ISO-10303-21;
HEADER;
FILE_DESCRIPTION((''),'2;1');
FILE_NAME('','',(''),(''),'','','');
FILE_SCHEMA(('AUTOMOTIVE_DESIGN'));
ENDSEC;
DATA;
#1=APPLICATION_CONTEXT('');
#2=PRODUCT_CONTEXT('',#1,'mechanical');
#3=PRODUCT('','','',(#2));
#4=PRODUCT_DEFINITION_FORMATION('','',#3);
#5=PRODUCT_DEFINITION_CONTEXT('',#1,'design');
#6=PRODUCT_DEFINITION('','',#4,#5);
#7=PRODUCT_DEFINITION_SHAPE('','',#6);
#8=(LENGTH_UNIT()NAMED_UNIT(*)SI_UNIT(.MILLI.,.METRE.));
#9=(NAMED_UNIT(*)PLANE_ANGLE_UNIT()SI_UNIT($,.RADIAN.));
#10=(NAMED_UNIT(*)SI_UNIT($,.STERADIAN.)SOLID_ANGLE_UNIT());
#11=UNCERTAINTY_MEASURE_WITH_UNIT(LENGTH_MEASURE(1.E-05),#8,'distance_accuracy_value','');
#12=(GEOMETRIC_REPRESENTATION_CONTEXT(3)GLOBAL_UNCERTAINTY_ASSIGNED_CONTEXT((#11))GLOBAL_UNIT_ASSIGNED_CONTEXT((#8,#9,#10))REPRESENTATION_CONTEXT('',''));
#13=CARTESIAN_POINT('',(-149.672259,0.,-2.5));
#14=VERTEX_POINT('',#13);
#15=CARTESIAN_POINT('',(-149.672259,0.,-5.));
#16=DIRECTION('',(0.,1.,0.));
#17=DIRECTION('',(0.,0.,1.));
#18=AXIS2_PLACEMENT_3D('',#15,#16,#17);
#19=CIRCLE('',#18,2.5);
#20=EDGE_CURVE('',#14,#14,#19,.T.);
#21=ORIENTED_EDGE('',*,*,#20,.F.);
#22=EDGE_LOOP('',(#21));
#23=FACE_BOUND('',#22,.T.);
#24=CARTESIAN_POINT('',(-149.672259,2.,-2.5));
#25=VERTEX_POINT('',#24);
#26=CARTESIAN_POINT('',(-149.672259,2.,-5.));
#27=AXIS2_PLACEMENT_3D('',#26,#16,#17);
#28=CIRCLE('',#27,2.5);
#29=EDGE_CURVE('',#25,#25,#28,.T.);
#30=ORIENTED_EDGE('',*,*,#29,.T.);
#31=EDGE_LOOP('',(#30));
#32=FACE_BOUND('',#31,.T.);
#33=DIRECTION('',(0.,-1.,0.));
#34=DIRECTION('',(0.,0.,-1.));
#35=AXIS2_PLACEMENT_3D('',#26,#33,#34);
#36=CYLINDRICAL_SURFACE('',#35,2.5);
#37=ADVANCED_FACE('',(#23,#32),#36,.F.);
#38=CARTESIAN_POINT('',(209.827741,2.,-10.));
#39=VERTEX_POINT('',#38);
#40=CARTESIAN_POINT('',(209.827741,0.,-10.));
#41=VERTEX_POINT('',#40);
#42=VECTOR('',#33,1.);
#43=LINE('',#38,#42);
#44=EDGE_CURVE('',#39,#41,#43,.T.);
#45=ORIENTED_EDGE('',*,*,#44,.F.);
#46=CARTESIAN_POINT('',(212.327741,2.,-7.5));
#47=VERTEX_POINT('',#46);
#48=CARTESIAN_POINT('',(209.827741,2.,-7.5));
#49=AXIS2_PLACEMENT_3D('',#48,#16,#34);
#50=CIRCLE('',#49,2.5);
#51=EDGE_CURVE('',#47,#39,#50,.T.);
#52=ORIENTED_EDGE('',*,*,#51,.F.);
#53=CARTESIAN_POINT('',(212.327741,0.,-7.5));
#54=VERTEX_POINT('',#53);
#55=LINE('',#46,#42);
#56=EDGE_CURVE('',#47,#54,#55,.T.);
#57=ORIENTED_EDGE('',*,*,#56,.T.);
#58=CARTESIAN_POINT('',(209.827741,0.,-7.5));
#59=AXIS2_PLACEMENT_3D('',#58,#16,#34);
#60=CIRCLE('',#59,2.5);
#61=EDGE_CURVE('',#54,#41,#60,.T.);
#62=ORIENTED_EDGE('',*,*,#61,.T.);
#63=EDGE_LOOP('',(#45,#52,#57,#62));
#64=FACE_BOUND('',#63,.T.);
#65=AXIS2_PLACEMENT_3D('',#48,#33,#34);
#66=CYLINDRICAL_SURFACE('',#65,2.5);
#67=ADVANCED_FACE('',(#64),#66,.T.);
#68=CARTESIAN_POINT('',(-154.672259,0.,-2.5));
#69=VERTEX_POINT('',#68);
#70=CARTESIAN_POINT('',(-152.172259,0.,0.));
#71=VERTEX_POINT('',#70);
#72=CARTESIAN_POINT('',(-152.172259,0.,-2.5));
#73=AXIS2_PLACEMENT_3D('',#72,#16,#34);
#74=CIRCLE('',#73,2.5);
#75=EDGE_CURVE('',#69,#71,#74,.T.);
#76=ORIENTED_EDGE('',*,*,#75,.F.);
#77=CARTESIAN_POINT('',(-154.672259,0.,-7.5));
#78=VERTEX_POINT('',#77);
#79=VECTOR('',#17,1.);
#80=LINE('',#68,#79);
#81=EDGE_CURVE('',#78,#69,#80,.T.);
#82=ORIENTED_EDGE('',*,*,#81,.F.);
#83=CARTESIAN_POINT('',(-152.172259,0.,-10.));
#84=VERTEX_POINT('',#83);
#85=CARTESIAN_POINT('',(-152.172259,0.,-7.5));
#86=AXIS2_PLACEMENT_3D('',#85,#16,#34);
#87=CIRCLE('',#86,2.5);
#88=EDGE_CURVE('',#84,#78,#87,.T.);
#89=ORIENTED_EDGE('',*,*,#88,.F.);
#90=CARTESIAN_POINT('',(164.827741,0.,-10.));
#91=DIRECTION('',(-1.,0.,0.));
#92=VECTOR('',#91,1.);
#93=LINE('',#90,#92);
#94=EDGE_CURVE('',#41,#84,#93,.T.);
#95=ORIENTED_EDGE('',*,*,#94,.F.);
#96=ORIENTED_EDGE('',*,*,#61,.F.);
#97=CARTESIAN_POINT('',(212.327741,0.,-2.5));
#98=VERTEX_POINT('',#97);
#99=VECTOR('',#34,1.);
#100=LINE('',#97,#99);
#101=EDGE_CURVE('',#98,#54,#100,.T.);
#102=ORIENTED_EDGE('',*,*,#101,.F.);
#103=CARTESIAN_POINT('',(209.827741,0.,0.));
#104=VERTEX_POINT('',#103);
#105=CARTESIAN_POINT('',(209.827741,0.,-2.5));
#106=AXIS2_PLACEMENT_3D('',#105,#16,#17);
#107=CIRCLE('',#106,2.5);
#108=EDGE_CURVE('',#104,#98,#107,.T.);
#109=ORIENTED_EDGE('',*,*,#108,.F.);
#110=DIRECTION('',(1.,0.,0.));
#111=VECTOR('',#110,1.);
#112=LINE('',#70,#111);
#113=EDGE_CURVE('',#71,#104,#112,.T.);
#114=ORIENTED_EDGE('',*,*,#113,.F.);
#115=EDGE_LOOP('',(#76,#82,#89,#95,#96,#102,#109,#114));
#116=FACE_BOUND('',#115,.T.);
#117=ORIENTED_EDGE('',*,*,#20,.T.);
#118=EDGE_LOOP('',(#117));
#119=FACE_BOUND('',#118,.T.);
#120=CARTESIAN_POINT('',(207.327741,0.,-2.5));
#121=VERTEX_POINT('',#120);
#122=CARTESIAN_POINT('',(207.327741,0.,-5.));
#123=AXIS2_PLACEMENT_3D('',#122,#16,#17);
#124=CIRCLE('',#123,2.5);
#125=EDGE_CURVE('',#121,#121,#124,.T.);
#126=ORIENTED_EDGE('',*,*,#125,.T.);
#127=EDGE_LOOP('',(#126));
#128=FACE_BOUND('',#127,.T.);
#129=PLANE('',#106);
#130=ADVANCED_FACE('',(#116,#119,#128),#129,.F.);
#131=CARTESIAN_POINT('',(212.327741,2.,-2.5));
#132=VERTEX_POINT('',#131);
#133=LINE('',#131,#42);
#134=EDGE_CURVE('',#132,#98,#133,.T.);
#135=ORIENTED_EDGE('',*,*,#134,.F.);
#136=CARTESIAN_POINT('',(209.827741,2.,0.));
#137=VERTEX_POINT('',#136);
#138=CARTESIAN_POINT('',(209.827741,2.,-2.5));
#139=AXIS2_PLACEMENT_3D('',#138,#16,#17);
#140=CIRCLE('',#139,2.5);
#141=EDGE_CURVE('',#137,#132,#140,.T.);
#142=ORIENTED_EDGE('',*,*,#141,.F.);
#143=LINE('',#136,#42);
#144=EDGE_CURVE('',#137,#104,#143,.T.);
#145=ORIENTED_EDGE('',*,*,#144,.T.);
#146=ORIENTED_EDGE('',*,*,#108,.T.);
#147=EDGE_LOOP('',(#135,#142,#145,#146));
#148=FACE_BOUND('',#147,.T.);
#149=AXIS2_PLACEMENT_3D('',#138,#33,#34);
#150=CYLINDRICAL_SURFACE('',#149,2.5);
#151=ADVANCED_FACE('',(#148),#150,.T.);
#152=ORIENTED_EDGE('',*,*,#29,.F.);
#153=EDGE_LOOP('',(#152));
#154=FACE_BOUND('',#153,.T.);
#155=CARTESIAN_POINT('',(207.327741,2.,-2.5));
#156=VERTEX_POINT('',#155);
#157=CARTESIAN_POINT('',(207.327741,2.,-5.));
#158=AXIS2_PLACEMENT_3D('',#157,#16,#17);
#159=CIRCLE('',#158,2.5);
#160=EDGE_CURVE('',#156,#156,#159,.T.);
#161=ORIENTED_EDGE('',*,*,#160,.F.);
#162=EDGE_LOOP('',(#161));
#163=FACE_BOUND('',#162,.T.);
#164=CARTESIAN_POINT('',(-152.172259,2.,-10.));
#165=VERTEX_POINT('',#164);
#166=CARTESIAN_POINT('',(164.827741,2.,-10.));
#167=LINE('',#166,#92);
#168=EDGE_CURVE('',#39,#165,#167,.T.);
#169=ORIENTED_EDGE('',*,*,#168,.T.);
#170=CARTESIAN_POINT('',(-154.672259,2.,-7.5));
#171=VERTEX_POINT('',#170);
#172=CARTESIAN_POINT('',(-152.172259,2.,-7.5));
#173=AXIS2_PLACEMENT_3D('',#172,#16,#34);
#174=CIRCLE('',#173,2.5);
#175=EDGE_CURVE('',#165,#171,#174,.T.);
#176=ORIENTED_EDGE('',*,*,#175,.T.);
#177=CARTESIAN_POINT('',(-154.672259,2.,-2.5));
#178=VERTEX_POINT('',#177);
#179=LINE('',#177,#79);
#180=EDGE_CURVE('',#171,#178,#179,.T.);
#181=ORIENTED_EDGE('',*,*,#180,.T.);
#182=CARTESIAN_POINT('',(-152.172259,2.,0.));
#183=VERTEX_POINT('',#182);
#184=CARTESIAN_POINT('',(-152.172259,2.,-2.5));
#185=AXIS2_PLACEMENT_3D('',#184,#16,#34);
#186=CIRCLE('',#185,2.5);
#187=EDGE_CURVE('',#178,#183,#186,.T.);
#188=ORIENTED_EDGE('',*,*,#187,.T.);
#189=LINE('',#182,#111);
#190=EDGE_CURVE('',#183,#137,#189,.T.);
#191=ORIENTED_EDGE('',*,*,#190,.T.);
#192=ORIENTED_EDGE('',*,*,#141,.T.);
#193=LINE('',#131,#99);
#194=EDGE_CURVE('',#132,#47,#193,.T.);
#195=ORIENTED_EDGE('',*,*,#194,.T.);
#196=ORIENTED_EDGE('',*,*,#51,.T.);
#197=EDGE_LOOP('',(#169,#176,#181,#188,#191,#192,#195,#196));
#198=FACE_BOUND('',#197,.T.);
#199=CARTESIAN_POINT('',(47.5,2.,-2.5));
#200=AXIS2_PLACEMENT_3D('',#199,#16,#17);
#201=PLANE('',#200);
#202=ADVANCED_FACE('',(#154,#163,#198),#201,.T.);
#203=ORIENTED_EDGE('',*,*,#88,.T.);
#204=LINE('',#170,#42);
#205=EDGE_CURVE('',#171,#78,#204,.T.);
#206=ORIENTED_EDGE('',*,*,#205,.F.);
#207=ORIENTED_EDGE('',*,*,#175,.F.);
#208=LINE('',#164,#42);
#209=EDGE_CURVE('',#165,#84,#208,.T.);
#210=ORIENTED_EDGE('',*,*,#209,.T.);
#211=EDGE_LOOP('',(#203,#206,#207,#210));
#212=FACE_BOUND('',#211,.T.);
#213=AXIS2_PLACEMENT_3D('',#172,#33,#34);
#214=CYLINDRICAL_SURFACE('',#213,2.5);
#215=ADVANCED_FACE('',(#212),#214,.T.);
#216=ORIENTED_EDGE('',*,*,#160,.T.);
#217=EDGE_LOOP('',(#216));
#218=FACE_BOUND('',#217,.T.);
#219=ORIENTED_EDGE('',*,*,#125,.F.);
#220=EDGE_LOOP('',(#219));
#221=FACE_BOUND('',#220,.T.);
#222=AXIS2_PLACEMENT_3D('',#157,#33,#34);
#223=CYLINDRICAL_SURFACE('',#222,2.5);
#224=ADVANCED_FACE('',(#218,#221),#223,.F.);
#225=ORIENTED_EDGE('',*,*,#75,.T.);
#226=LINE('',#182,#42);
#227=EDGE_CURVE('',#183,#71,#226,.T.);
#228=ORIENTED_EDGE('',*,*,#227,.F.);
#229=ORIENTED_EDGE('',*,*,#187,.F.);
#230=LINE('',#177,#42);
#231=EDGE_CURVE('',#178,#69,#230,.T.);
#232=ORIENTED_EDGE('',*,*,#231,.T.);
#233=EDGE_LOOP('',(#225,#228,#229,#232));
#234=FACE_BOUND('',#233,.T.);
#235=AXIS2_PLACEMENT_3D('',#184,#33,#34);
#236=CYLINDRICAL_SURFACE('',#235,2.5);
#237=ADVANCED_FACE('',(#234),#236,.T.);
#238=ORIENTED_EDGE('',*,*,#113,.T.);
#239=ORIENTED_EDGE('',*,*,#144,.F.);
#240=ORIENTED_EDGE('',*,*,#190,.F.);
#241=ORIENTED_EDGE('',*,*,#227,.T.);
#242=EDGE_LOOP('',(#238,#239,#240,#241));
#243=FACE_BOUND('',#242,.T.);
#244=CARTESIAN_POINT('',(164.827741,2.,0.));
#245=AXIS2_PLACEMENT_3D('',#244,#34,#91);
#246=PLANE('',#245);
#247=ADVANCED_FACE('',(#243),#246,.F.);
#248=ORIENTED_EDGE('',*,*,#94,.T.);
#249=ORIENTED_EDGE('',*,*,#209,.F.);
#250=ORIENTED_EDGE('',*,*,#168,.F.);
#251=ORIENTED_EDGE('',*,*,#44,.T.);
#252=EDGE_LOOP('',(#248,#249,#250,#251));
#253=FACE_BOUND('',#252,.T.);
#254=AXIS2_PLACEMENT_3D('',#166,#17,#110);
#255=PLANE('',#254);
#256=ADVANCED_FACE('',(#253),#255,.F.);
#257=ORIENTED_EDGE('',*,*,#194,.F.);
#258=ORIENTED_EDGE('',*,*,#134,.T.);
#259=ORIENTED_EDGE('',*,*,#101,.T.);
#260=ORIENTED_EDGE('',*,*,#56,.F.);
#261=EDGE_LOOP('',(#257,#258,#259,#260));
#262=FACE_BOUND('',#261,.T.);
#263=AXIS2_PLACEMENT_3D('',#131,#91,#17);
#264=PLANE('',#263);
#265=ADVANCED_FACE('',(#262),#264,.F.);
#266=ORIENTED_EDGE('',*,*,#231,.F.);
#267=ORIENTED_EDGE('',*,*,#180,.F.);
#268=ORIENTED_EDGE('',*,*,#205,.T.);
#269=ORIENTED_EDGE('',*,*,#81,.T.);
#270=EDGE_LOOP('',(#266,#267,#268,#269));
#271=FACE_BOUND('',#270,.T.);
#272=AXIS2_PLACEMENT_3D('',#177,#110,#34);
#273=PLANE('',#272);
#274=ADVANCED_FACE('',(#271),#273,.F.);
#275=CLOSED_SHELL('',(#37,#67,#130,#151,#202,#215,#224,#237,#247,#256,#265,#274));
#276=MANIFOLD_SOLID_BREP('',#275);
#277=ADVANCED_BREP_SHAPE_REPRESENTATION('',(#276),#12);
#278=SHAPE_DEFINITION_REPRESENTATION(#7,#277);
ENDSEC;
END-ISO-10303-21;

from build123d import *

# Parameters (mm, degrees)
SKETCH1_R           = 2.5
BOSS_EXTRUDE2_DEPTH = 2
FLEX1_OUTLINE_R     = 2.5
FLEX1_DEPTH         = 2


# Read off the part's stored shape, not the designer's step: Flex1
with BuildPart() as part:
    # Sketch1 → Boss-Extrude2 (new body)
    with BuildSketch(Plane(origin=(0, 0, 0), x_dir=(1, 0, 0), z_dir=(0, 1, 0))):
        with BuildLine():
            Line((2.5, 0), (47.5, 0))
            ThreePointArc((47.5, 0), (49.267766953, 0.732233047), (50, 2.5))
            Line((50, 2.5), (50, 7.5))
            ThreePointArc((50, 7.5), (49.267766953, 9.267766953), (47.5, 10))
            Line((47.5, 10), (2.5, 10))
            ThreePointArc((2.5, 10), (0.732233047, 9.267766953), (0, 7.5))
            Line((0, 7.5), (0, 2.5))
            ThreePointArc((0, 2.5), (0.732233047, 0.732233047), (2.5, 0))
        make_face()
        with Locations(Location((5, 5, 0), (0, 0, 270))):
            Circle(SKETCH1_R, mode=Mode.SUBTRACT)
        with Locations(Location((45, 5, 0), (0, 0, 270))):
            Circle(SKETCH1_R, mode=Mode.SUBTRACT)
    extrude(amount=BOSS_EXTRUDE2_DEPTH)

    # Flex1 outline → Flex1 (add)
    # profile 1 of 4: a face of its own
    with BuildSketch(Plane(origin=(0, 0, 0), x_dir=(1, 0, 0), z_dir=(0, 1, 0))):
        with BuildLine():
            Line((2.5, 10), (-152.172258813, 10))
            ThreePointArc((-152.172258813, 10), (-153.940025766, 9.267766953), (-154.672258813, 7.5))
            Line((-154.672258813, 7.5), (-154.672258813, 2.5))
            ThreePointArc((-154.672258813, 2.5), (-153.940025766, 0.732233047), (-152.172258813, 0))
            Line((-152.172258813, 0), (2.5, 0))
            ThreePointArc((2.5, 0), (0.732233047, 0.732233047), (0, 2.5))
            Line((0, 2.5), (0, 7.5))
            ThreePointArc((0, 7.5), (0.732233047, 9.267766953), (2.5, 10))
        make_face()
        with Locations((-149.672258813, 5)):
            Circle(FLEX1_OUTLINE_R, mode=Mode.SUBTRACT)
    # profile 2 of 4: a face of its own
    with BuildSketch(Plane(origin=(0, 0, 0), x_dir=(1, 0, 0), z_dir=(0, 1, 0))):
        with BuildLine():
            Line((209.827741187, 10), (47.5, 10))
            ThreePointArc((47.5, 10), (49.267766953, 9.267766953), (50, 7.5))
            Line((50, 7.5), (50, 2.5))
            ThreePointArc((50, 2.5), (49.267766953, 0.732233047), (47.5, 0))
            Line((47.5, 0), (209.827741187, 0))
            ThreePointArc((209.827741187, 0), (211.59550814, 0.732233047), (212.327741187, 2.5))
            Line((212.327741187, 2.5), (212.327741187, 7.5))
            ThreePointArc((212.327741187, 7.5), (211.59550814, 9.267766953), (209.827741187, 10))
        make_face()
        with Locations((207.327741187, 5)):
            Circle(FLEX1_OUTLINE_R, mode=Mode.SUBTRACT)
    # profile 3 of 4: a face of its own
    with BuildSketch(Plane(origin=(0, 0, 0), x_dir=(1, 0, 0), z_dir=(0, 1, 0))):
        with Locations((5, 5)):
            Circle(FLEX1_OUTLINE_R)
    # profile 4 of 4: a face of its own
    with BuildSketch(Plane(origin=(0, 0, 0), x_dir=(1, 0, 0), z_dir=(0, 1, 0))):
        with Locations((45, 5)):
            Circle(FLEX1_OUTLINE_R)
    extrude(amount=FLEX1_DEPTH)


solid = part.part
